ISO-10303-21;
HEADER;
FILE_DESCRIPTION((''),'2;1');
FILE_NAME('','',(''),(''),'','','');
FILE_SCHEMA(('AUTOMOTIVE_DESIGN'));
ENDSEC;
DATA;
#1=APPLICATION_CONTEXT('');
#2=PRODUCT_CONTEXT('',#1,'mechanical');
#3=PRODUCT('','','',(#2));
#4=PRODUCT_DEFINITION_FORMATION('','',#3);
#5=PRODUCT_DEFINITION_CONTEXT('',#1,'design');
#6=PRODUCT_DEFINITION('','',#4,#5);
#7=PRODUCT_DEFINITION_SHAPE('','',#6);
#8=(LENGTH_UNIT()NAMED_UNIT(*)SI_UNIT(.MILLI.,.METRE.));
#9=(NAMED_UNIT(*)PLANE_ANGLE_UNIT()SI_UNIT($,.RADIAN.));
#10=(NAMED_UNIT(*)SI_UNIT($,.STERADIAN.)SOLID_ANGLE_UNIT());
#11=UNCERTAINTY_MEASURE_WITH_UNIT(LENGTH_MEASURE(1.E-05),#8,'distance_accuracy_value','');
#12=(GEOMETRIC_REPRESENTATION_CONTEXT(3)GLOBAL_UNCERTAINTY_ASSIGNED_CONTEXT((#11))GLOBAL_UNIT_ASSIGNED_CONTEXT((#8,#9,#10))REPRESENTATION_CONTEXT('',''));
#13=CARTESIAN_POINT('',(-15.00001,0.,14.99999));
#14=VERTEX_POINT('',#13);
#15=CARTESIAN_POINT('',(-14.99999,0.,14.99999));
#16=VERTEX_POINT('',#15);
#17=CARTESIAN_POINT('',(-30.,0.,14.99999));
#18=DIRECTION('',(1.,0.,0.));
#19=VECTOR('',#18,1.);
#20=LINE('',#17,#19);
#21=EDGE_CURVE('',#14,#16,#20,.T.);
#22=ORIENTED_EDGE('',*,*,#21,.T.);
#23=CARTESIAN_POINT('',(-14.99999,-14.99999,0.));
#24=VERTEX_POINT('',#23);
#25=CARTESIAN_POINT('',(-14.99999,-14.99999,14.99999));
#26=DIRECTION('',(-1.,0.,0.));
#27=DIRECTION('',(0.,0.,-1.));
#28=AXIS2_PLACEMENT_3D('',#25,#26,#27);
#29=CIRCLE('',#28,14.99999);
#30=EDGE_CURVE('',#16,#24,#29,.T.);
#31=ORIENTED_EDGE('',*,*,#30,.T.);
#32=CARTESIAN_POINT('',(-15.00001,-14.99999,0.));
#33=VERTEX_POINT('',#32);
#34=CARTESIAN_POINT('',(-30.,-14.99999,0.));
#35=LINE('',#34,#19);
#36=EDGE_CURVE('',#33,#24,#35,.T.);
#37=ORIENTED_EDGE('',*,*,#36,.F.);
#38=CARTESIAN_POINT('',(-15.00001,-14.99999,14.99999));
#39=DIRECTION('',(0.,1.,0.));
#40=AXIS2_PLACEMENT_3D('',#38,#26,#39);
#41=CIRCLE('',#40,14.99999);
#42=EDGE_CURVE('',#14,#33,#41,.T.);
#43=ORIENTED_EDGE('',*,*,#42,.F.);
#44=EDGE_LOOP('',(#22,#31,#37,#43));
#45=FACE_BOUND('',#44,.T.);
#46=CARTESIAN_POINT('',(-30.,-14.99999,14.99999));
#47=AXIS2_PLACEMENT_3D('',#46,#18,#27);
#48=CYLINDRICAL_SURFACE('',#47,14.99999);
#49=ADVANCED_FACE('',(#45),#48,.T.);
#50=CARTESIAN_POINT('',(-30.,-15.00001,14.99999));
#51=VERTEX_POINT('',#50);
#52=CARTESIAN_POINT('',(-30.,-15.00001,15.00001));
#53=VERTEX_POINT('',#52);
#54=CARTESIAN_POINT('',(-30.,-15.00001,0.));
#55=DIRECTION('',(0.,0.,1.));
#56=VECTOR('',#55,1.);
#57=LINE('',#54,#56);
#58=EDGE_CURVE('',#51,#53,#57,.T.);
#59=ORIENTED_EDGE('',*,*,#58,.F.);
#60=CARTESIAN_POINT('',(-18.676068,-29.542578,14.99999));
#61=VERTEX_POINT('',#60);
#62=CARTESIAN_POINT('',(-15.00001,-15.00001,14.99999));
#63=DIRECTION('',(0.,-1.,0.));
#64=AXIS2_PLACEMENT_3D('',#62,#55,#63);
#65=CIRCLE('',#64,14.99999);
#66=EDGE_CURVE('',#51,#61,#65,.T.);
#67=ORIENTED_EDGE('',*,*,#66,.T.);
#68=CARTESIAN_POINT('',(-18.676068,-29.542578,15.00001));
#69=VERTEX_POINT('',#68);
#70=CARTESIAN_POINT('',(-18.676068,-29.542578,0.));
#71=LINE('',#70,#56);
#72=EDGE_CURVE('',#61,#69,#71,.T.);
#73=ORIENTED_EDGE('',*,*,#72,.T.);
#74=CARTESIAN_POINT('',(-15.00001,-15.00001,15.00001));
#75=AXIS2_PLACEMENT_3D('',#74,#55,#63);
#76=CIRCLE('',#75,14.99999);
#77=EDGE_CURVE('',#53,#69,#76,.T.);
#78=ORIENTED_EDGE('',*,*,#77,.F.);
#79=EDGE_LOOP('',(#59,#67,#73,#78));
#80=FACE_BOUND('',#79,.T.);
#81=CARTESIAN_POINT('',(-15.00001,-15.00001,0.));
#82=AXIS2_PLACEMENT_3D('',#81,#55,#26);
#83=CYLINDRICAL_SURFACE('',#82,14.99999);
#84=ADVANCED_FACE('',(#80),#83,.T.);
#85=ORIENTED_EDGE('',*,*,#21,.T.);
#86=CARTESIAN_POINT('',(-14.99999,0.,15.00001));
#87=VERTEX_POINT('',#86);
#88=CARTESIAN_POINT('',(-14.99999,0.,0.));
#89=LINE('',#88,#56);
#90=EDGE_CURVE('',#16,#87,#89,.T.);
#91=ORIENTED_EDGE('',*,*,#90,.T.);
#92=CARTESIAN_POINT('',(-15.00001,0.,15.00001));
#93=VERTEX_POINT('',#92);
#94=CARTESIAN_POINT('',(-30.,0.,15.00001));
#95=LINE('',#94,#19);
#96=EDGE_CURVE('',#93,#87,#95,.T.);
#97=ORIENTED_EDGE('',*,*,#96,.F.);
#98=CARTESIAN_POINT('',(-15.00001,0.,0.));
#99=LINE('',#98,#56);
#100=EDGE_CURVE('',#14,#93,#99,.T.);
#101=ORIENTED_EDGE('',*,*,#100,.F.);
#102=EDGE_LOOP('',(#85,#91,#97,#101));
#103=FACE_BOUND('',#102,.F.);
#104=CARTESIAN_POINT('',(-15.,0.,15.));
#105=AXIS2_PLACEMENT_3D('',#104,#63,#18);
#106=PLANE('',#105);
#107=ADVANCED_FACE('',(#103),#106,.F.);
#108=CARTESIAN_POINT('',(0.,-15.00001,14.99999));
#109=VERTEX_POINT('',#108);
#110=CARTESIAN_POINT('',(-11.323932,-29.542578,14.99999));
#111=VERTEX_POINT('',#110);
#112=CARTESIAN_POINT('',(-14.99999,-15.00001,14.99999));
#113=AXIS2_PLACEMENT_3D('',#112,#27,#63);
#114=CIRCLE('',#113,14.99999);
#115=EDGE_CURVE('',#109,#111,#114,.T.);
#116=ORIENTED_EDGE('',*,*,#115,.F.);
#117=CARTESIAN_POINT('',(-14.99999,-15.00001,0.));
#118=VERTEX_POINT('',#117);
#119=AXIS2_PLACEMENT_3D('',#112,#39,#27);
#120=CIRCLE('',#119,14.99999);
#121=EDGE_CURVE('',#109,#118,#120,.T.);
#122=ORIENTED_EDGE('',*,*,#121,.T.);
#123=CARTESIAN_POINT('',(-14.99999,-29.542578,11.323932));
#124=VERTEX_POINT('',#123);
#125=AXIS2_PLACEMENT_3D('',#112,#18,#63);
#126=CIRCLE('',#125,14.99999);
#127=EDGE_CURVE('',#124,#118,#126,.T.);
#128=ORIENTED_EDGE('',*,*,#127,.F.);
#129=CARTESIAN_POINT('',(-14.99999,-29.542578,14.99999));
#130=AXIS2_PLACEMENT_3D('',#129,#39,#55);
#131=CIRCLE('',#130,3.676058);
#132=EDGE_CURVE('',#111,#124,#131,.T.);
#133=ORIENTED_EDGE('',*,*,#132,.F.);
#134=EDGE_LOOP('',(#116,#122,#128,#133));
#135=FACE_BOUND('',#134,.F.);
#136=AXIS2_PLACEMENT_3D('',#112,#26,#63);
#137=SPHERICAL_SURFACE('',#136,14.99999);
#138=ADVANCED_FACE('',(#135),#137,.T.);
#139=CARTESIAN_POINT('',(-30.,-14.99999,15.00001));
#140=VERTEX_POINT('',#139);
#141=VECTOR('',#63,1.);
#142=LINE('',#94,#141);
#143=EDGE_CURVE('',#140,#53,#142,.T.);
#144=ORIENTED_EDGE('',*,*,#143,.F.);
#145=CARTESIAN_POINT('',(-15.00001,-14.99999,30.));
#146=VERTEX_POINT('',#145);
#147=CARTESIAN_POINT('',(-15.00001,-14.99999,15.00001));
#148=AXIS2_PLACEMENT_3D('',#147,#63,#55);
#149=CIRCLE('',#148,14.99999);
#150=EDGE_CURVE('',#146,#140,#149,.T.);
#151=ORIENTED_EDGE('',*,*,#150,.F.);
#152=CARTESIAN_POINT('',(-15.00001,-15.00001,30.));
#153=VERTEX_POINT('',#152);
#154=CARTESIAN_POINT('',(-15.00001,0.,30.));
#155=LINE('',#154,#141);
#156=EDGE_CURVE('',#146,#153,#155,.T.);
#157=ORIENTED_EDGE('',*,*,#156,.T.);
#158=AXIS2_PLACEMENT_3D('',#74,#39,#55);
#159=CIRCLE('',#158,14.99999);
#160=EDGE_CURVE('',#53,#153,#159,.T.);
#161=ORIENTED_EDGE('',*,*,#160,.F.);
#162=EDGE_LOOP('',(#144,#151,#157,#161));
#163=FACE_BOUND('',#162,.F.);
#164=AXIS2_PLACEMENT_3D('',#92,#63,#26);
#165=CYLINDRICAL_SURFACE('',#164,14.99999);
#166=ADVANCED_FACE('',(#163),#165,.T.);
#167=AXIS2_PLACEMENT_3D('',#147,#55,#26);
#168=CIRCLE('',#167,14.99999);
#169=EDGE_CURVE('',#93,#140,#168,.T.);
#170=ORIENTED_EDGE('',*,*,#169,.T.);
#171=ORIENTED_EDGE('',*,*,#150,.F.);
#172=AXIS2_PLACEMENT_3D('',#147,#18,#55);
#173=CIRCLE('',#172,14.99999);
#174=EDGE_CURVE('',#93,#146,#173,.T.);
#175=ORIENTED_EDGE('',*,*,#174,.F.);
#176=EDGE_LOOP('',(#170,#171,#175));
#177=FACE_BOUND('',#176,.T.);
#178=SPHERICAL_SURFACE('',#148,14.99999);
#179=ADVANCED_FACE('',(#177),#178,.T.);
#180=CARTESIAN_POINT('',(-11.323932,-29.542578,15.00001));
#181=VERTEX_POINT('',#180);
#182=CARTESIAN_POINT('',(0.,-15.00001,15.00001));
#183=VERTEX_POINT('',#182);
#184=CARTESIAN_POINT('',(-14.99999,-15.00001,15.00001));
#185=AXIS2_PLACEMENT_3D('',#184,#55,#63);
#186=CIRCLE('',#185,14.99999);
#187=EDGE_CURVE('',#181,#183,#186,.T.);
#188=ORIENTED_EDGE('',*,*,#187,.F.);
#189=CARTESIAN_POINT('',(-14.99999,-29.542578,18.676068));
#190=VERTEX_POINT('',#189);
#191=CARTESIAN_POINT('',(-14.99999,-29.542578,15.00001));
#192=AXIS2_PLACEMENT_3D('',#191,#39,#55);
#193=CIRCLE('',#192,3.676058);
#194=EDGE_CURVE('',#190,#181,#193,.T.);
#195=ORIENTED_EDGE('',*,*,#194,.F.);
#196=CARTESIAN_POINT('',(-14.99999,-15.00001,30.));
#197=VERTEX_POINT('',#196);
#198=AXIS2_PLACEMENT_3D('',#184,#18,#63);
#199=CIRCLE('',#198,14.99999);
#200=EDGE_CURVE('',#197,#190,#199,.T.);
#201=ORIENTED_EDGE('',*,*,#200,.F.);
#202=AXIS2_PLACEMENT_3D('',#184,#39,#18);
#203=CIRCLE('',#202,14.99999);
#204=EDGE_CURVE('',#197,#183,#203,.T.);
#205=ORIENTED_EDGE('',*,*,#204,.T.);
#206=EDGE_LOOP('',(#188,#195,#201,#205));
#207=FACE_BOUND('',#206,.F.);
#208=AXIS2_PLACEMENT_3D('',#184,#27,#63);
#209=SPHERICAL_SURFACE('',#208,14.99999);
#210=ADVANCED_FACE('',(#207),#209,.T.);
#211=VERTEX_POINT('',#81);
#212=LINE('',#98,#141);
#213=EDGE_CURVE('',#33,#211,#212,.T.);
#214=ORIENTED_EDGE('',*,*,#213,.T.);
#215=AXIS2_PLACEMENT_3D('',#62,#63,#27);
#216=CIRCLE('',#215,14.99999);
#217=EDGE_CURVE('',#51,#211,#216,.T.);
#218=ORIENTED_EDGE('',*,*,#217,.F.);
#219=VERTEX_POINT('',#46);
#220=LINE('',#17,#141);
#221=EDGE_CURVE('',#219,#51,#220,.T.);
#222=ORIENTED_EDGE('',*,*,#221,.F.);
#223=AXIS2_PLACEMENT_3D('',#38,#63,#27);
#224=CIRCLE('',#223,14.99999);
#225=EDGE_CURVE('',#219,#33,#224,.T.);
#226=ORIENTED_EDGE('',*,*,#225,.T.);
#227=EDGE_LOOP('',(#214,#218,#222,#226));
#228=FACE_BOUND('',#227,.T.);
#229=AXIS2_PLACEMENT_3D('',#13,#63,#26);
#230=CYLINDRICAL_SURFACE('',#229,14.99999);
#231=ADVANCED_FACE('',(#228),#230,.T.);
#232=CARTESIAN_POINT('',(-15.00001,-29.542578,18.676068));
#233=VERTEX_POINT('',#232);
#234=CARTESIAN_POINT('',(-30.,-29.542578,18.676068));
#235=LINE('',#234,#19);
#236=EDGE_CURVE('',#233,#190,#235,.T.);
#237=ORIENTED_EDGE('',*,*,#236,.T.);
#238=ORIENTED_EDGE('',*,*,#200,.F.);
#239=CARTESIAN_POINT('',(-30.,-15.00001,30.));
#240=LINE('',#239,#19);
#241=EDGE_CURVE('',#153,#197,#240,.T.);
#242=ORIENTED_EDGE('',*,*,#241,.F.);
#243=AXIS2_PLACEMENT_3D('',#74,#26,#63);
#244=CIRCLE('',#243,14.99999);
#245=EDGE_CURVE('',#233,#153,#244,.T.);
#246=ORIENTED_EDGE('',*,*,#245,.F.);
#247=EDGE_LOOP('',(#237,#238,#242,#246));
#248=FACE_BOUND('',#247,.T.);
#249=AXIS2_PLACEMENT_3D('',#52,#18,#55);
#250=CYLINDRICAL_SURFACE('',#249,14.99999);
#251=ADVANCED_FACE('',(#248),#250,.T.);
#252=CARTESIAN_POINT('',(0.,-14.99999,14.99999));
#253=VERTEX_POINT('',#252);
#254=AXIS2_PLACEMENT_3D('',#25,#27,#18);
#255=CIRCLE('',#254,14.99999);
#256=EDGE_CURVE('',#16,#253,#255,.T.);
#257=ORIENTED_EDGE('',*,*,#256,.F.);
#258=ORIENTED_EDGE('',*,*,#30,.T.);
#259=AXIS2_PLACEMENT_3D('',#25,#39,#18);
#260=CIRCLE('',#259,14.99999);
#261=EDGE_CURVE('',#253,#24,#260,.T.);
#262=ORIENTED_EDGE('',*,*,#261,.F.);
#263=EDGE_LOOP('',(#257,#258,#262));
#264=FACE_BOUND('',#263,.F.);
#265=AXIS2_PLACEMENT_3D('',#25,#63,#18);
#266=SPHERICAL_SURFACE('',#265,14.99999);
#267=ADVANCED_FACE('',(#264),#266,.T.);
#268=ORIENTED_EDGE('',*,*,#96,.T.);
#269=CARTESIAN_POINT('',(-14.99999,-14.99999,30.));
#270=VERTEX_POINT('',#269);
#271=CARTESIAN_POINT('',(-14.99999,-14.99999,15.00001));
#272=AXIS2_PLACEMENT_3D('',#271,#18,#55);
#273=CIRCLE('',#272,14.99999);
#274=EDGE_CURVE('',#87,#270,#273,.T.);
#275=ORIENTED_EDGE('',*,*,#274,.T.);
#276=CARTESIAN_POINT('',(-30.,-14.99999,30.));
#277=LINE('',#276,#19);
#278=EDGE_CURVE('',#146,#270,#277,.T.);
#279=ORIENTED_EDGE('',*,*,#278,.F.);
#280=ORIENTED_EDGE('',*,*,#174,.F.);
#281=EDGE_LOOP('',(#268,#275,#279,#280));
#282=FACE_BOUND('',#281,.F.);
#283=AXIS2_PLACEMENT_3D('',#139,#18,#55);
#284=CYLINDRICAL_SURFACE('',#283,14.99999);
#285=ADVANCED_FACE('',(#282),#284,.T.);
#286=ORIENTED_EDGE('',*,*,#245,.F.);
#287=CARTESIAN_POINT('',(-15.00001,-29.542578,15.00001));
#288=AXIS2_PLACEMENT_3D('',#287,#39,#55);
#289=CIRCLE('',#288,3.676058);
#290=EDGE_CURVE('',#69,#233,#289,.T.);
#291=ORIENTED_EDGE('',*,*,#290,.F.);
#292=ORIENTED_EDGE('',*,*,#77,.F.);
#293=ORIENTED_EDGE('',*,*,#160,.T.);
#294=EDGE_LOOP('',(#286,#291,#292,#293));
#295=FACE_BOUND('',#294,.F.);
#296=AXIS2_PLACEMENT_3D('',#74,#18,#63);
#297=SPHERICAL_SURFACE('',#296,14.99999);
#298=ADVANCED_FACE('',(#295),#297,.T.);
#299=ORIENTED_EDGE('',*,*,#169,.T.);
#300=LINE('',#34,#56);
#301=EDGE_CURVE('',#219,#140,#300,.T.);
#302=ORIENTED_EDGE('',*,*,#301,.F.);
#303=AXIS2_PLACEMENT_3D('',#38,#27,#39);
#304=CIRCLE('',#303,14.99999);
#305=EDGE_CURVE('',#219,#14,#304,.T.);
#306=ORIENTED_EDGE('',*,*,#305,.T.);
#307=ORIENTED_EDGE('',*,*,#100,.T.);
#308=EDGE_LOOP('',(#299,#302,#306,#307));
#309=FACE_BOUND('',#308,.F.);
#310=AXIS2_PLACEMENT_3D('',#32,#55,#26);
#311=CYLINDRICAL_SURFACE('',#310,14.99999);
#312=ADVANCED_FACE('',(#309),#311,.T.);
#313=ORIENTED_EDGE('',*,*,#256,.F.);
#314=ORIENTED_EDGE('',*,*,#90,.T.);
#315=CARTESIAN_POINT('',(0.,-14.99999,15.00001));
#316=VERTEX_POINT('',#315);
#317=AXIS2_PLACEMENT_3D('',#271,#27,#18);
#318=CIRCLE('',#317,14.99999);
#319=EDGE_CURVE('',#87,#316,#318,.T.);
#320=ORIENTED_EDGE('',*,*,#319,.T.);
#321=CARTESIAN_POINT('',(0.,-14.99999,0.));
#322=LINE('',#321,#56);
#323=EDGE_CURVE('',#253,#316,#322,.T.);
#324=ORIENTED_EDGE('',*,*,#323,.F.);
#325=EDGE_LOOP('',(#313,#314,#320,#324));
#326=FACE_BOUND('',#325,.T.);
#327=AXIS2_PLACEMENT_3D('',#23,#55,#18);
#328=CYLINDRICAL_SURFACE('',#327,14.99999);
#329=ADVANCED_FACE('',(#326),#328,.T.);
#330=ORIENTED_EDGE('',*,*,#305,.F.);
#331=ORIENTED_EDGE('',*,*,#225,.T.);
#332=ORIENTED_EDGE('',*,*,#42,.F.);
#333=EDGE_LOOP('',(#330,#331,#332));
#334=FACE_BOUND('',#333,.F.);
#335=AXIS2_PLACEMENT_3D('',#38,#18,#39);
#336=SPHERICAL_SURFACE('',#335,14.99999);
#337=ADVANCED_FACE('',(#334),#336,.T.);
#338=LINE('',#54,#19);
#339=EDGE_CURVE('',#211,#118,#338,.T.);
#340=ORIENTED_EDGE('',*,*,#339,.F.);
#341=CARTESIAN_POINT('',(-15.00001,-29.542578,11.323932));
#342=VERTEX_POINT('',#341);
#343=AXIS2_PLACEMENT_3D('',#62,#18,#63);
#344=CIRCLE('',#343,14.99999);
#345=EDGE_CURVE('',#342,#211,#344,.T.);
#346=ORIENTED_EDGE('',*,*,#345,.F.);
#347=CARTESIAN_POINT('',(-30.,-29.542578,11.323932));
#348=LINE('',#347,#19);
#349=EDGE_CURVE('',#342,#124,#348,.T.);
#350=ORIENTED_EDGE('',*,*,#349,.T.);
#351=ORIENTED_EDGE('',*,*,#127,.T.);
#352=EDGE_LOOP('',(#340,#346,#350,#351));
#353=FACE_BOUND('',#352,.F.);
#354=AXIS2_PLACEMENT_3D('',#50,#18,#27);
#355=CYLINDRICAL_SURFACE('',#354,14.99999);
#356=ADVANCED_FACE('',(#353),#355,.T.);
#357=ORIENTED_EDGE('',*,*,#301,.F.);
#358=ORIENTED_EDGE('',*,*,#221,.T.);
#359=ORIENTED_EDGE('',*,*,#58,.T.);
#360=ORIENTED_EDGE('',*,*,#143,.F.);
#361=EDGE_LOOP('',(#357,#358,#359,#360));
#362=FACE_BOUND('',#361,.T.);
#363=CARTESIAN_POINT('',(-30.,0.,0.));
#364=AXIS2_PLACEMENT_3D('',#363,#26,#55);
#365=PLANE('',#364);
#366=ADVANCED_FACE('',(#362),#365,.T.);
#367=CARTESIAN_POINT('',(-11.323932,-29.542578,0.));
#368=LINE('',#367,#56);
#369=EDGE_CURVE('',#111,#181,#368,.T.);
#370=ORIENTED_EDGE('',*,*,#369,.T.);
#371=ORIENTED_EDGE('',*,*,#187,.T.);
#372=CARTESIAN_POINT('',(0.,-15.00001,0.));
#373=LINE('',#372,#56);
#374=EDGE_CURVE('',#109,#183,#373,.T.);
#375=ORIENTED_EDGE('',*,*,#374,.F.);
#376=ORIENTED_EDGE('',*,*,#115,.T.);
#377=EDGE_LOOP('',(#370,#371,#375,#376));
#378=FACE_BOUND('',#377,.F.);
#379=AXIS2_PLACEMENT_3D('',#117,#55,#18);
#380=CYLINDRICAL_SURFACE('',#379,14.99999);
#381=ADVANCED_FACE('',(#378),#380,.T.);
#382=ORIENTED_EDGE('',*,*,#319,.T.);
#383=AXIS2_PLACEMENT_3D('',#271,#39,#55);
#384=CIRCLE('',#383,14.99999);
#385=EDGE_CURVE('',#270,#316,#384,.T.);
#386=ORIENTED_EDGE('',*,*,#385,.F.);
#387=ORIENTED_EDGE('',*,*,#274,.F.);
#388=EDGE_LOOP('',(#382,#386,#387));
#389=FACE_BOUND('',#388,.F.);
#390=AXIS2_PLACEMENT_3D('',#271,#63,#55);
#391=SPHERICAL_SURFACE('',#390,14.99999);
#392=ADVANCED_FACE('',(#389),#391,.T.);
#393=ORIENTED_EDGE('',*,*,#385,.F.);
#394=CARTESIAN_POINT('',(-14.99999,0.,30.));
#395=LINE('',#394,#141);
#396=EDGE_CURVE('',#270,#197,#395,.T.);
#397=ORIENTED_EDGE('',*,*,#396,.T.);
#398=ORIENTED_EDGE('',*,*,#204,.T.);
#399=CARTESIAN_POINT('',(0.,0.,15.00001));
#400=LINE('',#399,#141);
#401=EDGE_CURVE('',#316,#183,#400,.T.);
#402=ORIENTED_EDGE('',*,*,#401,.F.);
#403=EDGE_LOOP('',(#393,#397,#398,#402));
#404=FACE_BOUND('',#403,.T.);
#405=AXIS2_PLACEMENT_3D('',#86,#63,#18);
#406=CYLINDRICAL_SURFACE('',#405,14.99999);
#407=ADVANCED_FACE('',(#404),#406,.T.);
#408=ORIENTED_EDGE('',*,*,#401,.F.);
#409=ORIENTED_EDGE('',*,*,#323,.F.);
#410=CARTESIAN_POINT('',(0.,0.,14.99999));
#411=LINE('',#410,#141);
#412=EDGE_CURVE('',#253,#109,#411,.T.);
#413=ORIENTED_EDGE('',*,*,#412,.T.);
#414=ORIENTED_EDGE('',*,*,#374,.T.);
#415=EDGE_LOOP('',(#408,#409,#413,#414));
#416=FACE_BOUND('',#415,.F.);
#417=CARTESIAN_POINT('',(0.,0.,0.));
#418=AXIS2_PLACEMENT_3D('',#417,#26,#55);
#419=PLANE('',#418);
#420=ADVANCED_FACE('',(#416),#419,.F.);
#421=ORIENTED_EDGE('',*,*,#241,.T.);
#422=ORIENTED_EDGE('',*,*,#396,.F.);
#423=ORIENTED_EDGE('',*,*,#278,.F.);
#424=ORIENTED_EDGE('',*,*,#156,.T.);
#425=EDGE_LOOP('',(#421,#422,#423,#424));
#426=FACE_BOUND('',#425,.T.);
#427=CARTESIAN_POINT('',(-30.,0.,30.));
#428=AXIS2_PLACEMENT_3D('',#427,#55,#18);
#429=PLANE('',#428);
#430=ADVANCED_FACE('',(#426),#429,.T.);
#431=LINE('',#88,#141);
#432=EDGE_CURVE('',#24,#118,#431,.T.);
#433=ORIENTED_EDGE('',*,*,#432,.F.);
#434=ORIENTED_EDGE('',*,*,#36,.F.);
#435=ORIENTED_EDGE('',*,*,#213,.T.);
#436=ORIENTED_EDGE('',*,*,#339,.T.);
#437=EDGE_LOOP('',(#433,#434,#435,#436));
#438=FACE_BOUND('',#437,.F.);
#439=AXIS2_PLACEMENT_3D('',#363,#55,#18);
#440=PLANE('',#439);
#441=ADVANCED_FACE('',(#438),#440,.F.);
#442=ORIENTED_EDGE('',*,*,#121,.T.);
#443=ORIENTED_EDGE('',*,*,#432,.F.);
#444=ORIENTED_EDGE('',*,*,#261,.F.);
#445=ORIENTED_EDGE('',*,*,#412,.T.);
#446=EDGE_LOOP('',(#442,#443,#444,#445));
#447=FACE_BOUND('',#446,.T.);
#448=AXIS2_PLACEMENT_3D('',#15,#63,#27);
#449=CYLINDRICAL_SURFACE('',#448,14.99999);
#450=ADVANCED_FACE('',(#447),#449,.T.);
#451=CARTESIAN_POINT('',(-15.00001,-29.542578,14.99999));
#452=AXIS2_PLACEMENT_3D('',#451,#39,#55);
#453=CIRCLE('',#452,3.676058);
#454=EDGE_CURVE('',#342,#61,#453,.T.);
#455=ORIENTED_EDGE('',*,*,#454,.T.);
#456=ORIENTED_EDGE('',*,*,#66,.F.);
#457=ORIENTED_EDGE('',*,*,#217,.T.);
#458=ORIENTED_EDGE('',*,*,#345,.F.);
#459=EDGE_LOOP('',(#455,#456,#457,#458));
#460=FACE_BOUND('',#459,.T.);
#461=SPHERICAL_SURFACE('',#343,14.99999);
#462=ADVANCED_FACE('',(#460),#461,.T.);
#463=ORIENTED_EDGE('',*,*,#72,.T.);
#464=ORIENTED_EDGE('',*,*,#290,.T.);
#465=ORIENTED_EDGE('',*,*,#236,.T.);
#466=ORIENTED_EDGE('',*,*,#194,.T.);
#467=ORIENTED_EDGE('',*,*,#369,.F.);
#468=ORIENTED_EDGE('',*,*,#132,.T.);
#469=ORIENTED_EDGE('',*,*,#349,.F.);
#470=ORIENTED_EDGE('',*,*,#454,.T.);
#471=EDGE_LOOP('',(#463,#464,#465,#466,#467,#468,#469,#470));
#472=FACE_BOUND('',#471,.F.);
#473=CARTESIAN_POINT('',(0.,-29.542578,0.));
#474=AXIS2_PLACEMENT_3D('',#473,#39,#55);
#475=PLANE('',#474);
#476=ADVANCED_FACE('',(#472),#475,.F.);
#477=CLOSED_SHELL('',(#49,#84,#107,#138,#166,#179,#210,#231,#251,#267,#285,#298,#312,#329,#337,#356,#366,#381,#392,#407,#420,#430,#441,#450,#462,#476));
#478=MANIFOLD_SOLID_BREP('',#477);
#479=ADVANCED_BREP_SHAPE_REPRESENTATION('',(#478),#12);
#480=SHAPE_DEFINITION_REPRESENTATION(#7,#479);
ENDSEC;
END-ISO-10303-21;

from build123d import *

# Parameters (mm, degrees)
F0_W     = 30
F0_H     = 30
F1_DEPTH = 30
F2_R     = 14.99999
F3_W     = 1.993669197
F3_H     = 26.7333146185
F4_DEPTH = 30.001


# Not quite as in the source:
# - a fillet or chamfer is up to 0.001 mm smaller than in the source, because OpenCascade refuses the exact size


with BuildPart() as f1:
    # F0 (on Front) → F1 (new body)
    with BuildSketch(Plane.XZ):
        with Locations((-15, 15)):
            Rectangle(F0_W, F0_H)
    extrude(amount=F1_DEPTH)

    # F2 (radius 15 in the source; OpenCascade refuses exactly that, so slightly less here)
    f2_edges = [f1.edges().sort_by_distance(p)[0] for p in [
        (-15, -30, 0),
        (0, -30, 15),
        (-15, -30, 30),
        (-30, -30, 15),
        (0, -15, 30),
        (-30, -15, 30),
        (-15, 0, 30),
        (0, -15, 0),
        (0, 0, 15),
        (-15, 0, 0),
        (-30, 0, 15),
        (-30, -15, 0),
    ]]
    fillet(f2_edges, radius=F2_R)

    # F3 (on Right) → F4 (cut, through all)
    with BuildSketch(Plane.YZ):
        with Locations((-30.5394129828, 13.3666573092)):
            Rectangle(F3_W, F3_H)
    extrude(amount=-F4_DEPTH, mode=Mode.SUBTRACT)


solid = f1.part
